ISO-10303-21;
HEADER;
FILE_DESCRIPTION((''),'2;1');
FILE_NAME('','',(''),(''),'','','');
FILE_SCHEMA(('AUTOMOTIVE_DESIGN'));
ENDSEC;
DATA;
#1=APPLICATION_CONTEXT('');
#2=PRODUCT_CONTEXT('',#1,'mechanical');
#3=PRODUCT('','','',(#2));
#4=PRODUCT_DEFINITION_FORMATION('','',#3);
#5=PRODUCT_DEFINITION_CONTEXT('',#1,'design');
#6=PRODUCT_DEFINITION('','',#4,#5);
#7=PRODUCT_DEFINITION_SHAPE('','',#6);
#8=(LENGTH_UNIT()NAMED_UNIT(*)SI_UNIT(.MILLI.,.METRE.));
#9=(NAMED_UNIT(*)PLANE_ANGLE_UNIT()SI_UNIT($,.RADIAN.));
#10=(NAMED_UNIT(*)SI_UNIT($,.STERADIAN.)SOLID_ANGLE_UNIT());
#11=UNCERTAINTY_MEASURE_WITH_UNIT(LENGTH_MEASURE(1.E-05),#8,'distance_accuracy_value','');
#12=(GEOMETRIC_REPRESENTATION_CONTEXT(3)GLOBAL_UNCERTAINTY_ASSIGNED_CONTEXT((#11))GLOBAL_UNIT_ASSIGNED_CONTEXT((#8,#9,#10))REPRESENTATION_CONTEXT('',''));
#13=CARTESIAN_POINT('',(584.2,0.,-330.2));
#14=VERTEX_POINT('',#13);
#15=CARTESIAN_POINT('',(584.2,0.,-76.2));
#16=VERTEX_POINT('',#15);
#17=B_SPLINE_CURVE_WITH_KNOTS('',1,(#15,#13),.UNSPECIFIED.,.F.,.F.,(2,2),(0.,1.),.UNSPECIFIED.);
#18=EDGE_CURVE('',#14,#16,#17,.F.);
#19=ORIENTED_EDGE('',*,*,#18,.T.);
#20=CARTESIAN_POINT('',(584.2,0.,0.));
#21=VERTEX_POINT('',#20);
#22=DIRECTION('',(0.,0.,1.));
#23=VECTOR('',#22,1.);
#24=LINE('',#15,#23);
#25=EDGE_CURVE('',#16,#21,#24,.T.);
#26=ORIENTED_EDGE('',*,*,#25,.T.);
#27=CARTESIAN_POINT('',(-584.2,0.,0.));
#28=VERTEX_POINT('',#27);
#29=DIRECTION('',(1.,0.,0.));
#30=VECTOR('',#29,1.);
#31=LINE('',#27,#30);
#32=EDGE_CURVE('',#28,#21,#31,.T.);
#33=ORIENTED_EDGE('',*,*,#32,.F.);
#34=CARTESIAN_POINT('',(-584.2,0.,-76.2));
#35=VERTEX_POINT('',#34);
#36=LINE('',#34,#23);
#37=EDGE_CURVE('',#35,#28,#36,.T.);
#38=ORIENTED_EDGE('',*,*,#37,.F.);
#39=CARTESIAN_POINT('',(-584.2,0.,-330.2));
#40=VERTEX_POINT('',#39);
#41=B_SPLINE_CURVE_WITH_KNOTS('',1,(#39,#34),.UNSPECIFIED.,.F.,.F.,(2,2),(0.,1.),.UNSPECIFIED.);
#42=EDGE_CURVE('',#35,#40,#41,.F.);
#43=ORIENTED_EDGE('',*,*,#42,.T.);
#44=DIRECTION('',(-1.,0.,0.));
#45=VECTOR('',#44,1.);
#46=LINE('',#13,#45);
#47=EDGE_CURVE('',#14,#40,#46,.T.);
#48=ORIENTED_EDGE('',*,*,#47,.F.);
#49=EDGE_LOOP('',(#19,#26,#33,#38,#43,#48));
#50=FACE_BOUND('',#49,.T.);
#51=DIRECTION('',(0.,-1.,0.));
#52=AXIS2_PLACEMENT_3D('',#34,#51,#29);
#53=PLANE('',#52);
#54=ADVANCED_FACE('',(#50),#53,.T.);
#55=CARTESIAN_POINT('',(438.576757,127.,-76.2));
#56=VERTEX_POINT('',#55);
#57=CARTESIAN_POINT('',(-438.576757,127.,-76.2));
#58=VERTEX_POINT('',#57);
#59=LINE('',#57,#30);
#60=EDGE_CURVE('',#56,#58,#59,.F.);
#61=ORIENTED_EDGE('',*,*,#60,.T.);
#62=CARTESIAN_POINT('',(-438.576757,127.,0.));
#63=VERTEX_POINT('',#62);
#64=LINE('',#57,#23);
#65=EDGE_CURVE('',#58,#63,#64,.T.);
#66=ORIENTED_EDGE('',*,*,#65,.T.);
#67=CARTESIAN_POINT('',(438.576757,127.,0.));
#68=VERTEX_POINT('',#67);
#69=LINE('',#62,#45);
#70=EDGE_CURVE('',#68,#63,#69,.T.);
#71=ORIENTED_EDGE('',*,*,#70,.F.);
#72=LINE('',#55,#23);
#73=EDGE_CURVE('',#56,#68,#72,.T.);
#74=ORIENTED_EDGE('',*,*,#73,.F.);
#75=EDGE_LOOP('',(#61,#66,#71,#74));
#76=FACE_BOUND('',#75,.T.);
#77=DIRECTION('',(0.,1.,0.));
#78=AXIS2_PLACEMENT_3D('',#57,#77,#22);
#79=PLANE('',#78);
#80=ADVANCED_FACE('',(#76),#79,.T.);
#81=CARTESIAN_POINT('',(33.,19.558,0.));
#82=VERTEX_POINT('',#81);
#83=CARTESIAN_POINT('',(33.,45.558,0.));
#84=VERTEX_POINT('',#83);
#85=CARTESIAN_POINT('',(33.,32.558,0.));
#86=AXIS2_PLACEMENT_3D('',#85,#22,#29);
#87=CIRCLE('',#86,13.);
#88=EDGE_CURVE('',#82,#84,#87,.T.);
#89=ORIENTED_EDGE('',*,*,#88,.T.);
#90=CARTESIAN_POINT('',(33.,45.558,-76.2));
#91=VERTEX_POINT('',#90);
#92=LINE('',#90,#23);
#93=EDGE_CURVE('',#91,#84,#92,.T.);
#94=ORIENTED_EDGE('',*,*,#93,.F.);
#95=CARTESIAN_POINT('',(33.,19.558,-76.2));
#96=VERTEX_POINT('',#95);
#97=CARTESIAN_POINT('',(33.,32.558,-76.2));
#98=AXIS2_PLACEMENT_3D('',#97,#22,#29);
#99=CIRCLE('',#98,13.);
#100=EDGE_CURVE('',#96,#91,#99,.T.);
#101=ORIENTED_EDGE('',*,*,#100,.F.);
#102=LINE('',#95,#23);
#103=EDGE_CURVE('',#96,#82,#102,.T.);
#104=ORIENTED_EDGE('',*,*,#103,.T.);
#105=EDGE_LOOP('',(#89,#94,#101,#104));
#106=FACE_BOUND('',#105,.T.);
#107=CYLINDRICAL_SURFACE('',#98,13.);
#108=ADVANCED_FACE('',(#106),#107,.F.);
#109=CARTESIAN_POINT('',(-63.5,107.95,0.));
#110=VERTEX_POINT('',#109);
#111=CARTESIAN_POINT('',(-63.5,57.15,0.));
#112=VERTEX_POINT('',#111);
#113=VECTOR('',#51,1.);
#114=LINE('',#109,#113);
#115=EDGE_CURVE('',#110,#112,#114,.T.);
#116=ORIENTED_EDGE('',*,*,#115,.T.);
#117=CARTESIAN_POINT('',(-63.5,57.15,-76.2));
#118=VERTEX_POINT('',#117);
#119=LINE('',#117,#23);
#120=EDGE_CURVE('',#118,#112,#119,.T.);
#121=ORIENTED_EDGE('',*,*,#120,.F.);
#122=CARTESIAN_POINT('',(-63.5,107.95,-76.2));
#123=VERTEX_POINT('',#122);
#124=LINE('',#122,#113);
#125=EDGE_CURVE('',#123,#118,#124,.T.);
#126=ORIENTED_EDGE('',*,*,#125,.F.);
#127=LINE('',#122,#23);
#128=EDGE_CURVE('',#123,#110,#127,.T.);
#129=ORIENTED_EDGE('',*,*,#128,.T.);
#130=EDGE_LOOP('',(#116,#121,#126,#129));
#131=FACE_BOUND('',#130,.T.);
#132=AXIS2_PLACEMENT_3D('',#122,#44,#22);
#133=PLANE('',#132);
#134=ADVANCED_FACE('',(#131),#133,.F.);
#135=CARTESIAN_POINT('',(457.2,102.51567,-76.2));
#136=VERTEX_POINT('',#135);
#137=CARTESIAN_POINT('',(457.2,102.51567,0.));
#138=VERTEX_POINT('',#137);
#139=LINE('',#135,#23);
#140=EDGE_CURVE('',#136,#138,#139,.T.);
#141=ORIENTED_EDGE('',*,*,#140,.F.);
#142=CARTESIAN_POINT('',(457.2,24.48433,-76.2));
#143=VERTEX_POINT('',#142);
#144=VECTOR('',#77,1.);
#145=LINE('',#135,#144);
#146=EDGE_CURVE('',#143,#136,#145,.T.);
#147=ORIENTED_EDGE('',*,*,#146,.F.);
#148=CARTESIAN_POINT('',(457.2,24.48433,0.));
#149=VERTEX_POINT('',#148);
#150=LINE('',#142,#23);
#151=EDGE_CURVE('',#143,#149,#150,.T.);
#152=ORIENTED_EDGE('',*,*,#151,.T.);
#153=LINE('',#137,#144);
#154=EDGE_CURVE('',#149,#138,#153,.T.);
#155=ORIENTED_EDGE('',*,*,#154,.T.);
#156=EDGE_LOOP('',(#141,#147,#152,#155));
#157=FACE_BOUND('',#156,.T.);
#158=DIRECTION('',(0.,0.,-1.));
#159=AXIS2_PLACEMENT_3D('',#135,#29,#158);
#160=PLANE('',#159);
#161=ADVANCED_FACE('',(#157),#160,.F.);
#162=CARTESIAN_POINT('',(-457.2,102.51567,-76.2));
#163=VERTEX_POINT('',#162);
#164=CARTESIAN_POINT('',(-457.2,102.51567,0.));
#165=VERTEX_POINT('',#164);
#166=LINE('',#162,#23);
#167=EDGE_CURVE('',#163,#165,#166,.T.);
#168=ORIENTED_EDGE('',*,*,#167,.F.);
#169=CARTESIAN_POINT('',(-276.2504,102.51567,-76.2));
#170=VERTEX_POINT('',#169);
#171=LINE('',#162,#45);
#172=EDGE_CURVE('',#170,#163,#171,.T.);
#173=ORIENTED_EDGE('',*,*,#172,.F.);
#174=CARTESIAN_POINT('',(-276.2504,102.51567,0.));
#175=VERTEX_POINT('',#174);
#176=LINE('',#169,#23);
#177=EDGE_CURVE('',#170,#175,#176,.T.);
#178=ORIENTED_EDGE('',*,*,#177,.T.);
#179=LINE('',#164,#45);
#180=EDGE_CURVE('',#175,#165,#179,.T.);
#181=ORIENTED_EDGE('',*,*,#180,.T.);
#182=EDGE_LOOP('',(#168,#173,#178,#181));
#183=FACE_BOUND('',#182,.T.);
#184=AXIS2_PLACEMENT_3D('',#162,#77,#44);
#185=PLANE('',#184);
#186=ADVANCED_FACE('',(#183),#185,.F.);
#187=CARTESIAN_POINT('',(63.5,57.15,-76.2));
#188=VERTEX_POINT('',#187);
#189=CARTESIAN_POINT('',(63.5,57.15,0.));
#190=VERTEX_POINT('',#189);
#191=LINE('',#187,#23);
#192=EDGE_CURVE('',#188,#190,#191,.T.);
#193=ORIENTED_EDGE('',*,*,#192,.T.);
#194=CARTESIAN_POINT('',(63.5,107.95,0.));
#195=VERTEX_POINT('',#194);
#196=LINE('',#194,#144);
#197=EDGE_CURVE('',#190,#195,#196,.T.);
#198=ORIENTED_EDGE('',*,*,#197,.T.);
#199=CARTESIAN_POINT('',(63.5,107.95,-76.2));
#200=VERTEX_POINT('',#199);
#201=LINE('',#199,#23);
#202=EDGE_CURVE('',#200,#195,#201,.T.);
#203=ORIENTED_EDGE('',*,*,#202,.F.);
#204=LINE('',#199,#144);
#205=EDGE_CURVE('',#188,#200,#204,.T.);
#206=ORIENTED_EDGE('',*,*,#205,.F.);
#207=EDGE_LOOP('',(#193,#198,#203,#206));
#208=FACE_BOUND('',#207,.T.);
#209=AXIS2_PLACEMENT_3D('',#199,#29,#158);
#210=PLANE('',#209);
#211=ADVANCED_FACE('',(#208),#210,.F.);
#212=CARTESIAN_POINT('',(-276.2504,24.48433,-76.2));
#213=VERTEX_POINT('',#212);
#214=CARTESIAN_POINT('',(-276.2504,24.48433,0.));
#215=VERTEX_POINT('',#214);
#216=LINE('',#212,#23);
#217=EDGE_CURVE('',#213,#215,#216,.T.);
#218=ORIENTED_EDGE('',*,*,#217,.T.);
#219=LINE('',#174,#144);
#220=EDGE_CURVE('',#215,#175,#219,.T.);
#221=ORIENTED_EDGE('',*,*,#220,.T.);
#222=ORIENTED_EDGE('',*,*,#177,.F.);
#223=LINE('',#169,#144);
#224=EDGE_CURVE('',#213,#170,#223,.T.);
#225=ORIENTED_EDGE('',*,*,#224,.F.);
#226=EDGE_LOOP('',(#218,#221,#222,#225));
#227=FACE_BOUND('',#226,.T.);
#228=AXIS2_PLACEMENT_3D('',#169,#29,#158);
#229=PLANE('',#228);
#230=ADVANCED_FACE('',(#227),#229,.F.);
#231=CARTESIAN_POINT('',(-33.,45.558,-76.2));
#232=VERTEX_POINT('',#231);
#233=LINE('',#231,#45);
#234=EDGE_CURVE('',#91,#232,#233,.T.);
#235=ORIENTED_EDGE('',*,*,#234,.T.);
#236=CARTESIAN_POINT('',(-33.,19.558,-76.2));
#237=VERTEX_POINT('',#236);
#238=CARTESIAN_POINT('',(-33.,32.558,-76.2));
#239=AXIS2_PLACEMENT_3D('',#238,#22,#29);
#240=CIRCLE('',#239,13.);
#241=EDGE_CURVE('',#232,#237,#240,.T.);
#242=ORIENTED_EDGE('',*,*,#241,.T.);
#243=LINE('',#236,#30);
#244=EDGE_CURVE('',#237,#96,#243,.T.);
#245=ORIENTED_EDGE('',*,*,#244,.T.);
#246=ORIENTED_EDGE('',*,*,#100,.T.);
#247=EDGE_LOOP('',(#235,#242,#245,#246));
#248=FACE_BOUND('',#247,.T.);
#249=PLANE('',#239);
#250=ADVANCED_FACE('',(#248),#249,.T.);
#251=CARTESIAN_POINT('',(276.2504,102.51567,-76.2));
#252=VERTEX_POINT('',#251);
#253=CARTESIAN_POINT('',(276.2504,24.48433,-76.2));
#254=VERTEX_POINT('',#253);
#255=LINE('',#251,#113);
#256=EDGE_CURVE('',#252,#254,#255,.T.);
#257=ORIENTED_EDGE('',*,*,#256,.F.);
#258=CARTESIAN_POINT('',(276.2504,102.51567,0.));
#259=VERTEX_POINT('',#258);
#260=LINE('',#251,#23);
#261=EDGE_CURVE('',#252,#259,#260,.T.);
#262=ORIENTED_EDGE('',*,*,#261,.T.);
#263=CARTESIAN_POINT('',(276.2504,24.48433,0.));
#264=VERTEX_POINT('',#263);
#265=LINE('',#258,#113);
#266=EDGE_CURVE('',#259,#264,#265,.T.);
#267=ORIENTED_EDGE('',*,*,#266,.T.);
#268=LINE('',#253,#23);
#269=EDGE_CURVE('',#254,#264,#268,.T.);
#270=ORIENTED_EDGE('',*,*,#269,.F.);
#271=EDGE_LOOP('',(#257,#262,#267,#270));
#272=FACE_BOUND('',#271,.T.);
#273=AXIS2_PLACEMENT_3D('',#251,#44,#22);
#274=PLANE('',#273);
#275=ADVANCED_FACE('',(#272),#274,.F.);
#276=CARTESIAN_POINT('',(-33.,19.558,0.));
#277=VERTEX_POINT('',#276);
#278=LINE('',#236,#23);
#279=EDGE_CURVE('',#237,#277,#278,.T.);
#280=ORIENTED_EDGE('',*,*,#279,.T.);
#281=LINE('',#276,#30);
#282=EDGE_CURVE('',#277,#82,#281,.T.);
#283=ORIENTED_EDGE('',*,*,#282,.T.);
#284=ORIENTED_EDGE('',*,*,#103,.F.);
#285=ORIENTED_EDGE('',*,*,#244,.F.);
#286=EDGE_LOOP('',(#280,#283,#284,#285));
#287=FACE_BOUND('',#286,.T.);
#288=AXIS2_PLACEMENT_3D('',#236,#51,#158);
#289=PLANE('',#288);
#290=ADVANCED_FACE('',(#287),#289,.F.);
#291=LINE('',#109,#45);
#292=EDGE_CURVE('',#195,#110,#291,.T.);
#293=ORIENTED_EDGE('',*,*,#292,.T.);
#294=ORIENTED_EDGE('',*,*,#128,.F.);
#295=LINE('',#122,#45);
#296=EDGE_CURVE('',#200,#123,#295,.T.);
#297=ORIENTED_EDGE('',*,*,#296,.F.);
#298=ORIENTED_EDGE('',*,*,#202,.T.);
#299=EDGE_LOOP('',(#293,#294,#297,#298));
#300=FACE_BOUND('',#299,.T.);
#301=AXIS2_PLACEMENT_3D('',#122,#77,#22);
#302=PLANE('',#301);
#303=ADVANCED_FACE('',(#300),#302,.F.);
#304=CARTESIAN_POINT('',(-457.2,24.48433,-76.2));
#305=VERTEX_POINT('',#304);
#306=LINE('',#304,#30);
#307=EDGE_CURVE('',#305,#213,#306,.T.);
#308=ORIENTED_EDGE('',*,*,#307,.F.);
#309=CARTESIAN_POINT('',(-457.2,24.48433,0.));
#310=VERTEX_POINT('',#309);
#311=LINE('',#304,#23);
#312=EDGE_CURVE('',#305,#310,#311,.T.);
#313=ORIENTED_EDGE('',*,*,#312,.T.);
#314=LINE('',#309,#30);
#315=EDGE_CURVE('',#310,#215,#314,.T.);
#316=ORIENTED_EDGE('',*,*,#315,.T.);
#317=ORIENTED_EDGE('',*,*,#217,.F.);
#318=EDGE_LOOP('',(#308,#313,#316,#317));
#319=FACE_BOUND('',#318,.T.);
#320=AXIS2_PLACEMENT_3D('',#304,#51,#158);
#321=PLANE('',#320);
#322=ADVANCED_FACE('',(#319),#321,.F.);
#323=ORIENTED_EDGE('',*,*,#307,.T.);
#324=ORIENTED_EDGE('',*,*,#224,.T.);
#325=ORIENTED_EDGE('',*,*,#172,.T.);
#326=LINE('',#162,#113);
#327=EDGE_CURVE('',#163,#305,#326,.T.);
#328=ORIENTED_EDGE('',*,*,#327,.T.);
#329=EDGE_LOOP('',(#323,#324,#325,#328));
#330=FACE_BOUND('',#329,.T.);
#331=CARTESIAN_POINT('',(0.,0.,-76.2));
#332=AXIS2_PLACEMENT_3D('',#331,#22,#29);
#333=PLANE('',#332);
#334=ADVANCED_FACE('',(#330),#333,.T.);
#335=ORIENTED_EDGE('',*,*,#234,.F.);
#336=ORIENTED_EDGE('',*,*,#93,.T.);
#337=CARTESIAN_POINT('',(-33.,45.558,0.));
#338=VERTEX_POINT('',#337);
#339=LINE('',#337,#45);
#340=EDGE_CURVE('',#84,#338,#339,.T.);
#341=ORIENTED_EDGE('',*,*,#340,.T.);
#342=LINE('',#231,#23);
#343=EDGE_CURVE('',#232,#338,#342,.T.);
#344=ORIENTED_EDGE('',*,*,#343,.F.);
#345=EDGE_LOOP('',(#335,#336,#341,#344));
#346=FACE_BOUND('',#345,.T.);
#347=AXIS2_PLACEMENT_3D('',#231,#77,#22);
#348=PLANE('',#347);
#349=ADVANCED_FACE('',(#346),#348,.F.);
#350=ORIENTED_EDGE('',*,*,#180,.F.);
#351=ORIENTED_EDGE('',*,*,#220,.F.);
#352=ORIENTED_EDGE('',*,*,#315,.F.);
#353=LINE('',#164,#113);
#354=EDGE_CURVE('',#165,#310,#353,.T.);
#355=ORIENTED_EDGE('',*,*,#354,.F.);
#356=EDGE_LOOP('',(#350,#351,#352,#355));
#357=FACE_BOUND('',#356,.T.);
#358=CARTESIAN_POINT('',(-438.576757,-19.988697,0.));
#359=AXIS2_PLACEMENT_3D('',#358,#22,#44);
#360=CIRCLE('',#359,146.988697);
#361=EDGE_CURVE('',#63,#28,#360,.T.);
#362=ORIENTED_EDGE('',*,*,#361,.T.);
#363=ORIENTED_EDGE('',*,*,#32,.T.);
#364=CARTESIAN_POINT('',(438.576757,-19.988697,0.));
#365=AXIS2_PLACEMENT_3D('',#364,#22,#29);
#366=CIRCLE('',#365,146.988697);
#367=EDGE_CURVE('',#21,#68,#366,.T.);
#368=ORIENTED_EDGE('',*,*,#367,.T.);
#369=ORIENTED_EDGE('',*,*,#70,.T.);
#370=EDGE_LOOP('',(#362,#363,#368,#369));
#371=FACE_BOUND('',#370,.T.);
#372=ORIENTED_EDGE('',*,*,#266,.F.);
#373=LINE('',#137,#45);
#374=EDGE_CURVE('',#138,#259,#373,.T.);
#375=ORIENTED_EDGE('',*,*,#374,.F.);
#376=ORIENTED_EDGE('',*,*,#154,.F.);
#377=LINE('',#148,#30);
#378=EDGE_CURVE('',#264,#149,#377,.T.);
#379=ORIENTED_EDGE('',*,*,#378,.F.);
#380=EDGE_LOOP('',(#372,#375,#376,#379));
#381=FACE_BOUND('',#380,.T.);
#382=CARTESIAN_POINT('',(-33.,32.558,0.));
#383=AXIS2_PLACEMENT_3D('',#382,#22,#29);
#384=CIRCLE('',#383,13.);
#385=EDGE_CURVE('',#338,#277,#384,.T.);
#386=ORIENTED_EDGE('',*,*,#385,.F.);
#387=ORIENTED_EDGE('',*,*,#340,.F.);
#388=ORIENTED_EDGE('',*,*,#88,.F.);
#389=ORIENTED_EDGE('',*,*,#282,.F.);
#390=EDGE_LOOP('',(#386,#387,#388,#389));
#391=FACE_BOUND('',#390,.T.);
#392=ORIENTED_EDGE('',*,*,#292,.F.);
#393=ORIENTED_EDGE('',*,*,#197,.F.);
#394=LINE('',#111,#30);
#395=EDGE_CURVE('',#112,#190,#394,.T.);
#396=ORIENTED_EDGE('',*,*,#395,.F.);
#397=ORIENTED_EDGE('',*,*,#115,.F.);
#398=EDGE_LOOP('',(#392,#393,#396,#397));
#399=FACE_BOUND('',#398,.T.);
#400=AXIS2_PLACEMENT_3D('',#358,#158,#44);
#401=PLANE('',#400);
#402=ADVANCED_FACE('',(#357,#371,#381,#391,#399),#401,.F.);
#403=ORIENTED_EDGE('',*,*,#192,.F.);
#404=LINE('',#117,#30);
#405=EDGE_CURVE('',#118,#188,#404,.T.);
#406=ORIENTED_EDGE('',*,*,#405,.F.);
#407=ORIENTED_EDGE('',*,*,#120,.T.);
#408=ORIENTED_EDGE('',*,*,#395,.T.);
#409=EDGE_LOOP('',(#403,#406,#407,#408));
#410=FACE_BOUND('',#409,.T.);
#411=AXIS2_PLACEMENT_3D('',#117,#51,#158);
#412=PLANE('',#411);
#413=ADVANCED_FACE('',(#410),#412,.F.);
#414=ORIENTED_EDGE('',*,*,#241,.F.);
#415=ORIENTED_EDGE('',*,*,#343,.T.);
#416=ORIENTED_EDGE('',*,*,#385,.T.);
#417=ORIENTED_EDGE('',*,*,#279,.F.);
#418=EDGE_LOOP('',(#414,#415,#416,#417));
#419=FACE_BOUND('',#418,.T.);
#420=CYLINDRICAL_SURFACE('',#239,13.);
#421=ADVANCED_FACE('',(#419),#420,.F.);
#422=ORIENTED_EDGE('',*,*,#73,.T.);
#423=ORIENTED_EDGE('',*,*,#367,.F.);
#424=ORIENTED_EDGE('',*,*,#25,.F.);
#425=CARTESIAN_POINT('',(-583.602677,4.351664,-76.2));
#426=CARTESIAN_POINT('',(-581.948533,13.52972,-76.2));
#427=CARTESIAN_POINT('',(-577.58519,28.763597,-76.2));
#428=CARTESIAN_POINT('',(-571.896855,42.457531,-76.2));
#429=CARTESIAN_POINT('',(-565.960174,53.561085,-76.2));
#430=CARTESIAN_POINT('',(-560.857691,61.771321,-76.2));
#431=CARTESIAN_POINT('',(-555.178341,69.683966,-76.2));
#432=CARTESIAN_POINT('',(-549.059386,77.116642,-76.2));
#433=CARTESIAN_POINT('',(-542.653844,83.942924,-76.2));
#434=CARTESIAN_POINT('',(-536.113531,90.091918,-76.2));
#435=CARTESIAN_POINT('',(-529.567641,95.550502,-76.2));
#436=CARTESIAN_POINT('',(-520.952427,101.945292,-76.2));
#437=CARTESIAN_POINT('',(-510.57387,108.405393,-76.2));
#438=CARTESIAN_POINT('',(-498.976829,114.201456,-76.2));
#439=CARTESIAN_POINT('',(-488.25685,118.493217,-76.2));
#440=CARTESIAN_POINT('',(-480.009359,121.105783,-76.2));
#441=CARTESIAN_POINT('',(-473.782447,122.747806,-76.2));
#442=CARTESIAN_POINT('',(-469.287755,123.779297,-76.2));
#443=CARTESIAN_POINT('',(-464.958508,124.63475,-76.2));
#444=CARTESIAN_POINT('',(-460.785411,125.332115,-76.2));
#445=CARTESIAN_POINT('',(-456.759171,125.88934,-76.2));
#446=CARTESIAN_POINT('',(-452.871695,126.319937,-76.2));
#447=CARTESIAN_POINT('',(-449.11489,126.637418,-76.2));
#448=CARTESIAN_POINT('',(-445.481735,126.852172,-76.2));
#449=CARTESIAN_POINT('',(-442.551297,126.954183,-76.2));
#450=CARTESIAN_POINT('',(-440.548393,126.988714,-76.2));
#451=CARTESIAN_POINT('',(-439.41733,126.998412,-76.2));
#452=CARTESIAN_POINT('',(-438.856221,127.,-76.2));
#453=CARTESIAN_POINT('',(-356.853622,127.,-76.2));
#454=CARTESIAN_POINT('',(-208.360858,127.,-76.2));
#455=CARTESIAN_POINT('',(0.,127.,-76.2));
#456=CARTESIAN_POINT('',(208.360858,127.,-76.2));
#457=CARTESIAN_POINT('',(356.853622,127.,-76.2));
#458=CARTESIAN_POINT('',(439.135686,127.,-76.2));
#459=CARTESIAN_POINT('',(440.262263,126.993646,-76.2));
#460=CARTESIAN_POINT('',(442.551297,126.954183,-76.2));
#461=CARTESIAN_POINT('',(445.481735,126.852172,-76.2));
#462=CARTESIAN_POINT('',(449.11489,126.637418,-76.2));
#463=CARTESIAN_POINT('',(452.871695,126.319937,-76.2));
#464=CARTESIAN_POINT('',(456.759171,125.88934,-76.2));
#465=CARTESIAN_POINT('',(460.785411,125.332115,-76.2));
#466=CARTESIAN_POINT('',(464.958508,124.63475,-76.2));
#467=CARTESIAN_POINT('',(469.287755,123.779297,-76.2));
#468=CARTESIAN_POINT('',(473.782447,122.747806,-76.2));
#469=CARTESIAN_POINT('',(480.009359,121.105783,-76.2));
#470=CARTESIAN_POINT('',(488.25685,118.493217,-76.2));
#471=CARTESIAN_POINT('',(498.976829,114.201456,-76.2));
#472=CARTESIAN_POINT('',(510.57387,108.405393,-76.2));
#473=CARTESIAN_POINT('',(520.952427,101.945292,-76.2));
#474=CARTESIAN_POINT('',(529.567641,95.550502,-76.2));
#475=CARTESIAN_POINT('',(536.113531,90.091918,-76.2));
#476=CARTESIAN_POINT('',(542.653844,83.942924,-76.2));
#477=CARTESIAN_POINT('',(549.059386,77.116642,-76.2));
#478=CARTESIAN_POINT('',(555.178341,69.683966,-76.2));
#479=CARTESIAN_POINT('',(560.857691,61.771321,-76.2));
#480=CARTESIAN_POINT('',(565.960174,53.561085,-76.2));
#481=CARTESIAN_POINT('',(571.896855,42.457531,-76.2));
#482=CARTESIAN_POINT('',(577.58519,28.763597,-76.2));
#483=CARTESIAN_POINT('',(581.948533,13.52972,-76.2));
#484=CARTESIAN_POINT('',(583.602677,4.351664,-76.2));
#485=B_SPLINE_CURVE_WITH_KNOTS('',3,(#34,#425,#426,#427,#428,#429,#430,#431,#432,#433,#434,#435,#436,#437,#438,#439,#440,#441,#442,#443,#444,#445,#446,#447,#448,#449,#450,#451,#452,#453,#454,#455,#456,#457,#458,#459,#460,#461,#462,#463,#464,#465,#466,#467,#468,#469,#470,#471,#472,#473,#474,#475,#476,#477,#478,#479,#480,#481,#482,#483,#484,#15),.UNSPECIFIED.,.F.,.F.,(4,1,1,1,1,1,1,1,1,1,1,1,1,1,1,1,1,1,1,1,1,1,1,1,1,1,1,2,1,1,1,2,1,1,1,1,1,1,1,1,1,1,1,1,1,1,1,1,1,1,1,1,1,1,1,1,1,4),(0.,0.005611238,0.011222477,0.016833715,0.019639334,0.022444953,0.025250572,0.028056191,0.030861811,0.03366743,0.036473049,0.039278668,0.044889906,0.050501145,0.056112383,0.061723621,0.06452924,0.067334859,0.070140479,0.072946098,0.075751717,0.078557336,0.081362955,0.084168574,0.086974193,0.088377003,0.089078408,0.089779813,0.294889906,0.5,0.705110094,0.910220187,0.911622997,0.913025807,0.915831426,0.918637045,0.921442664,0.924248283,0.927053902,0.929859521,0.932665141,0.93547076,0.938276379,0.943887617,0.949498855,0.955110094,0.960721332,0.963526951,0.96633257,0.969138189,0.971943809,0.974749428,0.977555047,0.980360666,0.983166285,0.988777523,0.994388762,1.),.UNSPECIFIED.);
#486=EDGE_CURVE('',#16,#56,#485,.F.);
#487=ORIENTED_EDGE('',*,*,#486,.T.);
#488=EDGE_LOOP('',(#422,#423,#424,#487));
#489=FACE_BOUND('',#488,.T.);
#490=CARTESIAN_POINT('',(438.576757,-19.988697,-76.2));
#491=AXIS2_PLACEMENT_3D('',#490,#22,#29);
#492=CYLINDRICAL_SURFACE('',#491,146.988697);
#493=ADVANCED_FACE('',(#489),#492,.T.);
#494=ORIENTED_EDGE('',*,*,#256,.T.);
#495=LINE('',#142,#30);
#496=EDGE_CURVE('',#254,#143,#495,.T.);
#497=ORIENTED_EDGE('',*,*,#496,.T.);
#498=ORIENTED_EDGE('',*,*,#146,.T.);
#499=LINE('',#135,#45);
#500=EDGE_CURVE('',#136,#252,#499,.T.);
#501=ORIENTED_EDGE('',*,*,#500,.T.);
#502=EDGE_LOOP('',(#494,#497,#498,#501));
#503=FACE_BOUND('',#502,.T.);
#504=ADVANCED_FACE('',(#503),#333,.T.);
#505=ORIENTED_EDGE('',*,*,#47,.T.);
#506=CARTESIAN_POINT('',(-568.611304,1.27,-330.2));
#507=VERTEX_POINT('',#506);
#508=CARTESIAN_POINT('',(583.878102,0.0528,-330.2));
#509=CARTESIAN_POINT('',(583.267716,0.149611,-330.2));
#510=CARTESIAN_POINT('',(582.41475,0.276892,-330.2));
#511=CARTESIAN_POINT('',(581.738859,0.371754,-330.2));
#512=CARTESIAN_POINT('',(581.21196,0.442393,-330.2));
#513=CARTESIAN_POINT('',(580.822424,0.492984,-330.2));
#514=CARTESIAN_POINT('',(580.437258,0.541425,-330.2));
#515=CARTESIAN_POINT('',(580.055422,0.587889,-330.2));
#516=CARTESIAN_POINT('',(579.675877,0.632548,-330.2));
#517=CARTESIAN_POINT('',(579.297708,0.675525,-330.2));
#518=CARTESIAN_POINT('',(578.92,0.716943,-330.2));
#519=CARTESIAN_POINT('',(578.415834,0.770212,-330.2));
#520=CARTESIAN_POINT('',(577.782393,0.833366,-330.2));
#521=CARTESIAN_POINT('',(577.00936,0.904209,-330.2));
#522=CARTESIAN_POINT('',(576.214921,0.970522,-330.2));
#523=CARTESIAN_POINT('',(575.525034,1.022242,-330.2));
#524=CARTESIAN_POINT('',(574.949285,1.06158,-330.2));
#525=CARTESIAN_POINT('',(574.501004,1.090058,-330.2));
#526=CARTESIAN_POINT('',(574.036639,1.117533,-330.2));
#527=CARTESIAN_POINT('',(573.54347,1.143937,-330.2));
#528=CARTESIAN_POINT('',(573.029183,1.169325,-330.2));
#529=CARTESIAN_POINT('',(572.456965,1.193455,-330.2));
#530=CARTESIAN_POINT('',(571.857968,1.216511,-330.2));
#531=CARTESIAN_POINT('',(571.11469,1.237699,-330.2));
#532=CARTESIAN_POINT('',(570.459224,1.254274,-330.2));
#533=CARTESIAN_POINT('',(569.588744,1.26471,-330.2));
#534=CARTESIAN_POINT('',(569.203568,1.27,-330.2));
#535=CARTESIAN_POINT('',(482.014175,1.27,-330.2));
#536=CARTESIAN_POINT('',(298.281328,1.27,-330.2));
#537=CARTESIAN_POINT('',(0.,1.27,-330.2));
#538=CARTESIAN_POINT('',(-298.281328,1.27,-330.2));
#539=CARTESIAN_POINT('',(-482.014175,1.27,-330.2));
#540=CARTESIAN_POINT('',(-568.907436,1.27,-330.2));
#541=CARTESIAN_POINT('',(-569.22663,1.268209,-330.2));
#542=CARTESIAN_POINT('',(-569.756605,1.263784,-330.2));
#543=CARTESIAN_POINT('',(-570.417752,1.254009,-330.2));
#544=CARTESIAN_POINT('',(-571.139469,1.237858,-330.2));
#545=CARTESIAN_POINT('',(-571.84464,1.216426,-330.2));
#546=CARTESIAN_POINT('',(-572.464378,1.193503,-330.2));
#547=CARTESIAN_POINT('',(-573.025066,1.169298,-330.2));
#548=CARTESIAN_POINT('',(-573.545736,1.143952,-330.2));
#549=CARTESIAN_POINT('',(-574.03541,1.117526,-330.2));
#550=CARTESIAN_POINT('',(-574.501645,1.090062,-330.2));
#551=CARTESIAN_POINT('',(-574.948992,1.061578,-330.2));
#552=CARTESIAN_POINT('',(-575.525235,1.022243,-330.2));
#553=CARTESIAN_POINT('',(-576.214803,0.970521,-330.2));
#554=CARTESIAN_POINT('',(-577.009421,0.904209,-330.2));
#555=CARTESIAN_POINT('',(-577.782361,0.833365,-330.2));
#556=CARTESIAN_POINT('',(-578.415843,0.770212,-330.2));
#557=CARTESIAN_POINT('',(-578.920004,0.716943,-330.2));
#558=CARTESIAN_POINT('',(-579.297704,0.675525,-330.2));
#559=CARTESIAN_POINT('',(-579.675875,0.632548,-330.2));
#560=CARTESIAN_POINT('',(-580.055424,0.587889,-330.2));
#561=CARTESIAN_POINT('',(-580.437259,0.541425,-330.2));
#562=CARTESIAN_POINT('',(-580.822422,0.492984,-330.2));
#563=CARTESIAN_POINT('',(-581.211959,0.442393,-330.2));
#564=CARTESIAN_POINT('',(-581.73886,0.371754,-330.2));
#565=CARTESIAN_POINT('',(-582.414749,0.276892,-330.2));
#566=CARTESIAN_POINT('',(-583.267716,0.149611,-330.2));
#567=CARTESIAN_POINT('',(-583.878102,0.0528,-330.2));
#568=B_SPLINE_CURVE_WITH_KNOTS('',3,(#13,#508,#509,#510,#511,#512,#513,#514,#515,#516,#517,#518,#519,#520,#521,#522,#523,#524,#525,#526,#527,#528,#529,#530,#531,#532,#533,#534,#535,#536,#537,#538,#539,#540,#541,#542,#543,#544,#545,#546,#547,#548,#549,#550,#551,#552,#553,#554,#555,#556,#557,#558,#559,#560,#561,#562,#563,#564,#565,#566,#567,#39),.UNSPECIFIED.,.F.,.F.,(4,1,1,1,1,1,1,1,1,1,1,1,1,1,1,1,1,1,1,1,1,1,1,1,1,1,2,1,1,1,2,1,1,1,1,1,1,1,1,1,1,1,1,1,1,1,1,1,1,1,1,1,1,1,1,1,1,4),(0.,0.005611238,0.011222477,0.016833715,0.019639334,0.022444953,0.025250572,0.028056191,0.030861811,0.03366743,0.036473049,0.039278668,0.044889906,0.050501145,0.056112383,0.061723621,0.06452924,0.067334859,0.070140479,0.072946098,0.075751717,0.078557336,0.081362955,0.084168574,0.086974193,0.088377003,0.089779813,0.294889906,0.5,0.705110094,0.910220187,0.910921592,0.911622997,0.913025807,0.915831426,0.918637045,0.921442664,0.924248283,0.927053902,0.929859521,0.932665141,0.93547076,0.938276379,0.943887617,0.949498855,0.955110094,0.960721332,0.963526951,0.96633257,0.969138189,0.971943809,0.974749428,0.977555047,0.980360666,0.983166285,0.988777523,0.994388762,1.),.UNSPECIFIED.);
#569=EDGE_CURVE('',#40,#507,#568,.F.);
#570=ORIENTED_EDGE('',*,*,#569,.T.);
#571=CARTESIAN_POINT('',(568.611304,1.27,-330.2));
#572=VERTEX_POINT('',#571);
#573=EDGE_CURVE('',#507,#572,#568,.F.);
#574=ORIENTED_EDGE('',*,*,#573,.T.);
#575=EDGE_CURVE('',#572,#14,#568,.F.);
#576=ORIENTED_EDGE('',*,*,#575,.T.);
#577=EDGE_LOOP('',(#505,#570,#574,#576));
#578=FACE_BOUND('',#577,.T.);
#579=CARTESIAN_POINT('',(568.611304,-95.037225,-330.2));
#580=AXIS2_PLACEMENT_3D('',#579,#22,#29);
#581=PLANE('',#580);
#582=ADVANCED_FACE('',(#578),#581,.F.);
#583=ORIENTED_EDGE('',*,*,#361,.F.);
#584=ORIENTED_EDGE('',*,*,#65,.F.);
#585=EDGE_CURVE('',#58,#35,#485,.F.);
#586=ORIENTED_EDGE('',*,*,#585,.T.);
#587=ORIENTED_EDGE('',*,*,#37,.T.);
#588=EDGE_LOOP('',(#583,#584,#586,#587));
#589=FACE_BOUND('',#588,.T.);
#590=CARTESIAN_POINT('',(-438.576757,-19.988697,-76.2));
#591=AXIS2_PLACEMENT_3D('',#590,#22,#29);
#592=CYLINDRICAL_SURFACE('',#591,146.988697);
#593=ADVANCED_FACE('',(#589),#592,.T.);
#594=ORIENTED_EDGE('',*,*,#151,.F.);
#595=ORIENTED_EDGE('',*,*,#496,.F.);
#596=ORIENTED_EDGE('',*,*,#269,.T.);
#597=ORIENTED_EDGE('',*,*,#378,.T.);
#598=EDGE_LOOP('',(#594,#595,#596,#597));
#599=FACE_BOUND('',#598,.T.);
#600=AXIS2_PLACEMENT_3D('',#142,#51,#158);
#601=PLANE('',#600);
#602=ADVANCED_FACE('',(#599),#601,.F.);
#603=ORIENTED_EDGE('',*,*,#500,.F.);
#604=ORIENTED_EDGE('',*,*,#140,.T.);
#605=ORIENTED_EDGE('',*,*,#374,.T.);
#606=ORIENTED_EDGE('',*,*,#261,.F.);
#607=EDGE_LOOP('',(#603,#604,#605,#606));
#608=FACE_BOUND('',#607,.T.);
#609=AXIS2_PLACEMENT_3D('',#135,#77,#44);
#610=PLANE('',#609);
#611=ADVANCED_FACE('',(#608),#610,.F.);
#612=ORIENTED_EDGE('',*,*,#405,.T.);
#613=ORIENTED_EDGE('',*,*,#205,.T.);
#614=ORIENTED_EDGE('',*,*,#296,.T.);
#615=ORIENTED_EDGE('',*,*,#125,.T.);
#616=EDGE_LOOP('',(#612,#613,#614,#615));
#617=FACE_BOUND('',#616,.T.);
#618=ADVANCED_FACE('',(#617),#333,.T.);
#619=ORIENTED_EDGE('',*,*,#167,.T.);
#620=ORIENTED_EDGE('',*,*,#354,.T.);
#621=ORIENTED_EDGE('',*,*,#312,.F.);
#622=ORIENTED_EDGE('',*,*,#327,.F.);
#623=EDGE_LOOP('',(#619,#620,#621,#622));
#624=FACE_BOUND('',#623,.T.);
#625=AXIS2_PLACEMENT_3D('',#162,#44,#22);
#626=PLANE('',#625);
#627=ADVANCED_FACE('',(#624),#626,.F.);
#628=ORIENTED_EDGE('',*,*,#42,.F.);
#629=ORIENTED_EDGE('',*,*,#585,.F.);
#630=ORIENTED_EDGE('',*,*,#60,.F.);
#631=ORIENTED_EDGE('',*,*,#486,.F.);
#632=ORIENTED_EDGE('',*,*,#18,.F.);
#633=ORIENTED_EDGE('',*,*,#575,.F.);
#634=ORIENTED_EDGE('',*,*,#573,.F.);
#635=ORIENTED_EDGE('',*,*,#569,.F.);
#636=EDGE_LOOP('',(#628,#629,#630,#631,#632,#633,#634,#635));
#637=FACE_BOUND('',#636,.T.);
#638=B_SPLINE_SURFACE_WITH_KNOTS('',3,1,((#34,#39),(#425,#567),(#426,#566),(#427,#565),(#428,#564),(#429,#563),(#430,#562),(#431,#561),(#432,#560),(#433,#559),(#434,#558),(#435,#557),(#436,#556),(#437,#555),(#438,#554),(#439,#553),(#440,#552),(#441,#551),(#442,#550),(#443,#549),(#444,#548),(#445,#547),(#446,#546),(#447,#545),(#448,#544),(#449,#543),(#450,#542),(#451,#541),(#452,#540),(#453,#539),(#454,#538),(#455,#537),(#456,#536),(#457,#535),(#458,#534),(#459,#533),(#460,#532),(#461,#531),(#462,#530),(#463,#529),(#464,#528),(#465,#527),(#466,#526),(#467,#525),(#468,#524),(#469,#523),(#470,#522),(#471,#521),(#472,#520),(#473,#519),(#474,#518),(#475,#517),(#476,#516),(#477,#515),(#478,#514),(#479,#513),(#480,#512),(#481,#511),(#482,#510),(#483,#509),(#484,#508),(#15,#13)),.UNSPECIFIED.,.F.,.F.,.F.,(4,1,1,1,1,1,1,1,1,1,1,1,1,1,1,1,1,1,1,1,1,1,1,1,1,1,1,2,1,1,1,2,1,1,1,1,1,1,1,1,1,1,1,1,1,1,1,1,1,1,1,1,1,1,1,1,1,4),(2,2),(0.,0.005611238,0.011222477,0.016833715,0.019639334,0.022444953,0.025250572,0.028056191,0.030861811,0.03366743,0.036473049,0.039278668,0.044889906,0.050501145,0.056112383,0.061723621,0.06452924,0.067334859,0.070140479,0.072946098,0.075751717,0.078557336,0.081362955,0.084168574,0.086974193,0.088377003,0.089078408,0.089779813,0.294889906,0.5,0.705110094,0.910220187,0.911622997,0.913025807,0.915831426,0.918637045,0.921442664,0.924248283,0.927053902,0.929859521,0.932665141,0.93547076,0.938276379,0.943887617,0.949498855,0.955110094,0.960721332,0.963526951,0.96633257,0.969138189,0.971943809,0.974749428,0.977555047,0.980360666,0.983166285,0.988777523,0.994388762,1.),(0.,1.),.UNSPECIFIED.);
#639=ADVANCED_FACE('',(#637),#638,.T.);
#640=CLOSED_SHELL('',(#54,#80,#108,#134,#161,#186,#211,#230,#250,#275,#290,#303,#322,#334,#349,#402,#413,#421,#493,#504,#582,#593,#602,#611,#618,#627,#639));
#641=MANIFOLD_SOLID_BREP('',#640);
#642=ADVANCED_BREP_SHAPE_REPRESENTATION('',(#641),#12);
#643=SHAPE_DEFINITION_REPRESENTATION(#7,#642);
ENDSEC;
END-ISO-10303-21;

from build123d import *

# Parameters (mm, degrees)
BOSS_EXTRUDE1_DEPTH = 76.2
SKETCH2_W           = 180.9496
SKETCH2_H           = 78.03134
SKETCH2_W_2         = 127
SKETCH2_H_2         = 50.8
CUT_EXTRUDE1_DEPTH  = 76.2


with BuildPart() as part:
    # Sketch1 → Boss-Extrude1 (new body)
    with BuildSketch(Plane.XY):
        with BuildLine():
            Line((-584.2, 0), (584.2, 0))
            ThreePointArc((584.2, 0), (535.188258209, 90.789887512), (438.576756504, 127))
            Line((438.576756504, 127), (-438.576756504, 127))
            ThreePointArc((-438.576756504, 127), (-535.188258209, 90.789887512), (-584.2, 0))
        make_face()
    extrude(amount=-BOSS_EXTRUDE1_DEPTH)

    # Loft1: read off the stored shape, not the designer's step
    # Loft1: loft between two sections, ruled curve by curve
    loft1_from = [
        Edge.make_bspline([(-584.2, 0, -76.2), (-583.602677072, 4.351664449, -76.2), (-581.94853293, 13.529720202, -76.2), (-577.585189912, 28.763596798, -76.2), (-571.896855427, 42.457531156, -76.2), (-565.960173951, 53.561084536, -76.2), (-560.857691344, 61.771321412, -76.2), (-555.178341071, 69.68396559, -76.2), (-549.059386104, 77.11664178, -76.2), (-542.65384448, 83.942924223, -76.2), (-536.11353113, 90.091918429, -76.2), (-529.567640938, 95.550501886, -76.2), (-520.952426768, 101.945292478, -76.2), (-510.573870375, 108.405393128, -76.2), (-498.976829365, 114.201455922, -76.2), (-488.256849582, 118.493217251, -76.2), (-480.009359128, 121.10578275, -76.2), (-473.782446896, 122.747805575, -76.2), (-469.287755099, 123.779296572, -76.2), (-464.958507992, 124.634750113, -76.2), (-460.78541139, 125.332114872, -76.2), (-456.759171111, 125.889339521, -76.2), (-452.871694762, 126.319936535, -76.2), (-449.114889951, 126.637418388, -76.2), (-445.481735397, 126.852172344, -76.2), (-442.551297416, 126.954183445, -76.2), (-440.548392688, 126.988713545, -76.2), (-439.417330042, 126.998411604, -76.2), (-438.85622104, 127, -76.2), (-356.853622112, 127, -76.2), (-208.360858153, 127, -76.2), (0, 127, -76.2), (208.360858153, 127, -76.2), (356.853622112, 127, -76.2), (439.135685576, 127, -76.2), (440.262263441, 126.993646416, -76.2), (442.551297416, 126.954183445, -76.2), (445.481735397, 126.852172344, -76.2), (449.114889951, 126.637418388, -76.2), (452.871694762, 126.319936535, -76.2), (456.759171111, 125.889339521, -76.2), (460.78541139, 125.332114872, -76.2), (464.958507992, 124.634750113, -76.2), (469.287755099, 123.779296572, -76.2), (473.782446896, 122.747805575, -76.2), (480.009359128, 121.10578275, -76.2), (488.256849582, 118.493217251, -76.2), (498.976829365, 114.201455922, -76.2), (510.573870375, 108.405393128, -76.2), (520.952426768, 101.945292478, -76.2), (529.567640938, 95.550501886, -76.2), (536.11353113, 90.091918429, -76.2), (542.65384448, 83.942924223, -76.2), (549.059386104, 77.11664178, -76.2), (555.178341071, 69.68396559, -76.2), (560.857691344, 61.771321412, -76.2), (565.960173951, 53.561084536, -76.2), (571.896855427, 42.457531156, -76.2), (577.585189912, 28.763596798, -76.2), (581.94853293, 13.529720202, -76.2), (583.602677072, 4.351664449, -76.2), (584.2, 0, -76.2)], [0, 0, 0, 0, 0.005611238, 0.011222477, 0.016833715, 0.019639334, 0.022444953, 0.025250572, 0.028056191, 0.030861811, 0.03366743, 0.036473049, 0.039278668, 0.044889906, 0.050501145, 0.056112383, 0.061723621, 0.06452924, 0.067334859, 0.070140479, 0.072946098, 0.075751717, 0.078557336, 0.081362955, 0.084168574, 0.086974193, 0.088377003, 0.089078408, 0.089779813, 0.089779813, 0.294889906, 0.5, 0.705110094, 0.910220187, 0.910220187, 0.911622997, 0.913025807, 0.915831426, 0.918637045, 0.921442664, 0.924248283, 0.927053902, 0.929859521, 0.932665141, 0.93547076, 0.938276379, 0.943887617, 0.949498855, 0.955110094, 0.960721332, 0.963526951, 0.96633257, 0.969138189, 0.971943809, 0.974749428, 0.977555047, 0.980360666, 0.983166285, 0.988777523, 0.994388762, 1, 1, 1, 1], 3),
        Edge.make_line((584.2, 0, -76.2), (-584.2, 0, -76.2)),
    ]
    loft1_to = [
        Edge.make_bspline([(-584.2, 0, -330.2), (-583.878101952, 0.052800057, -330.2), (-583.267715844, 0.149611396, -330.2), (-582.414749369, 0.276891548, -330.2), (-581.738860454, 0.371753895, -330.2), (-581.211959231, 0.442392619, -330.2), (-580.82242239, 0.492983874, -330.2), (-580.437258746, 0.541425131, -330.2), (-580.055424309, 0.587888921, -330.2), (-579.67587509, 0.632547776, -330.2), (-579.297704023, 0.675524661, -330.2), (-578.920004041, 0.716942542, -330.2), (-578.415843138, 0.770211673, -330.2), (-577.782360828, 0.833365434, -330.2), (-577.009420934, 0.904209016, -330.2), (-576.214803468, 0.970521194, -330.2), (-575.525235405, 1.022243227, -330.2), (-574.948991796, 1.061577806, -330.2), (-574.501645168, 1.0900619, -330.2), (-574.035409855, 1.11752563, -330.2), (-573.545736133, 1.143951944, -330.2), (-573.025065946, 1.169298466, -330.2), (-572.464378068, 1.193502556, -330.2), (-571.844640219, 1.216425807, -330.2), (-571.139468768, 1.237858047, -330.2), (-570.417752062, 1.254008948, -330.2), (-569.756604739, 1.263783908, -330.2), (-569.226630089, 1.26820891, -330.2), (-568.907435621, 1.27, -330.2), (-482.014175175, 1.27, -330.2), (-298.281328262, 1.27, -330.2), (0, 1.27, -330.2), (298.281328262, 1.27, -330.2), (482.014175175, 1.27, -330.2), (569.203567514, 1.27, -330.2), (569.588743756, 1.264710472, -330.2), (570.459224282, 1.254274384, -330.2), (571.114690237, 1.237699455, -330.2), (571.857968498, 1.216511112, -330.2), (572.456964688, 1.193455108, -330.2), (573.029183058, 1.169324817, -330.2), (573.5434696, 1.143937438, -330.2), (574.036638767, 1.117533495, -330.2), (574.501004172, 1.090057797, -330.2), (574.949284923, 1.061579682, -330.2), (575.525034183, 1.022241939, -330.2), (576.21492146, 0.970521949, -330.2), (577.00936018, 0.904208627, -330.2), (577.78239323, 0.833365642, -330.2), (578.415834076, 0.770211615, -330.2), (578.919999998, 0.716942516, -330.2), (579.297708191, 0.675524688, -330.2), (579.675877264, 0.63254779, -330.2), (580.055422099, 0.587888907, -330.2), (580.437257579, 0.541425124, -330.2), (580.822423551, 0.492983882, -330.2), (581.211959859, 0.442392623, -330.2), (581.738859448, 0.371753888, -330.2), (582.41475001, 0.276891552, -330.2), (583.267715502, 0.149611394, -330.2), (583.878101952, 0.052800057, -330.2), (584.2, 0, -330.2)], [0, 0, 0, 0, 0.005611238, 0.011222477, 0.016833715, 0.019639334, 0.022444953, 0.025250572, 0.028056191, 0.030861811, 0.03366743, 0.036473049, 0.039278668, 0.044889906, 0.050501145, 0.056112383, 0.061723621, 0.06452924, 0.067334859, 0.070140479, 0.072946098, 0.075751717, 0.078557336, 0.081362955, 0.084168574, 0.086974193, 0.088377003, 0.089078408, 0.089779813, 0.089779813, 0.294889906, 0.5, 0.705110094, 0.910220187, 0.910220187, 0.911622997, 0.913025807, 0.915831426, 0.918637045, 0.921442664, 0.924248283, 0.927053902, 0.929859521, 0.932665141, 0.93547076, 0.938276379, 0.943887617, 0.949498855, 0.955110094, 0.960721332, 0.963526951, 0.96633257, 0.969138189, 0.971943809, 0.974749428, 0.977555047, 0.980360666, 0.983166285, 0.988777523, 0.994388762, 1, 1, 1, 1], 3),
        Edge.make_line((584.2, 0, -330.2), (-584.2, 0, -330.2)),
    ]
    loft1 = Solid(Shell([*[Face.make_surface_from_curves(loft1_from[k], loft1_to[k]) for k in range(2)], Face(Wire(loft1_from)), Face(Wire(loft1_to))]))
    add(loft1)

    # Sketch2 → Cut-Extrude1 (cut)
    with BuildSketch(Plane.XY):
        with Locations((-366.7252, 63.5)):
            Rectangle(SKETCH2_W, SKETCH2_H)
        with Locations((366.7252, 63.5)):
            Rectangle(SKETCH2_W, SKETCH2_H)
        with BuildLine():
            Line((-33, 45.558), (33, 45.558))
            ThreePointArc((33, 45.558), (46, 32.558), (33, 19.558))
            Line((33, 19.558), (-33, 19.558))
            ThreePointArc((-33, 19.558), (-46, 32.558), (-33, 45.558))
        make_face()
        with Locations((0, 82.55)):
            Rectangle(SKETCH2_W_2, SKETCH2_H_2)
    extrude(amount=-CUT_EXTRUDE1_DEPTH, mode=Mode.SUBTRACT)


solid = part.part
